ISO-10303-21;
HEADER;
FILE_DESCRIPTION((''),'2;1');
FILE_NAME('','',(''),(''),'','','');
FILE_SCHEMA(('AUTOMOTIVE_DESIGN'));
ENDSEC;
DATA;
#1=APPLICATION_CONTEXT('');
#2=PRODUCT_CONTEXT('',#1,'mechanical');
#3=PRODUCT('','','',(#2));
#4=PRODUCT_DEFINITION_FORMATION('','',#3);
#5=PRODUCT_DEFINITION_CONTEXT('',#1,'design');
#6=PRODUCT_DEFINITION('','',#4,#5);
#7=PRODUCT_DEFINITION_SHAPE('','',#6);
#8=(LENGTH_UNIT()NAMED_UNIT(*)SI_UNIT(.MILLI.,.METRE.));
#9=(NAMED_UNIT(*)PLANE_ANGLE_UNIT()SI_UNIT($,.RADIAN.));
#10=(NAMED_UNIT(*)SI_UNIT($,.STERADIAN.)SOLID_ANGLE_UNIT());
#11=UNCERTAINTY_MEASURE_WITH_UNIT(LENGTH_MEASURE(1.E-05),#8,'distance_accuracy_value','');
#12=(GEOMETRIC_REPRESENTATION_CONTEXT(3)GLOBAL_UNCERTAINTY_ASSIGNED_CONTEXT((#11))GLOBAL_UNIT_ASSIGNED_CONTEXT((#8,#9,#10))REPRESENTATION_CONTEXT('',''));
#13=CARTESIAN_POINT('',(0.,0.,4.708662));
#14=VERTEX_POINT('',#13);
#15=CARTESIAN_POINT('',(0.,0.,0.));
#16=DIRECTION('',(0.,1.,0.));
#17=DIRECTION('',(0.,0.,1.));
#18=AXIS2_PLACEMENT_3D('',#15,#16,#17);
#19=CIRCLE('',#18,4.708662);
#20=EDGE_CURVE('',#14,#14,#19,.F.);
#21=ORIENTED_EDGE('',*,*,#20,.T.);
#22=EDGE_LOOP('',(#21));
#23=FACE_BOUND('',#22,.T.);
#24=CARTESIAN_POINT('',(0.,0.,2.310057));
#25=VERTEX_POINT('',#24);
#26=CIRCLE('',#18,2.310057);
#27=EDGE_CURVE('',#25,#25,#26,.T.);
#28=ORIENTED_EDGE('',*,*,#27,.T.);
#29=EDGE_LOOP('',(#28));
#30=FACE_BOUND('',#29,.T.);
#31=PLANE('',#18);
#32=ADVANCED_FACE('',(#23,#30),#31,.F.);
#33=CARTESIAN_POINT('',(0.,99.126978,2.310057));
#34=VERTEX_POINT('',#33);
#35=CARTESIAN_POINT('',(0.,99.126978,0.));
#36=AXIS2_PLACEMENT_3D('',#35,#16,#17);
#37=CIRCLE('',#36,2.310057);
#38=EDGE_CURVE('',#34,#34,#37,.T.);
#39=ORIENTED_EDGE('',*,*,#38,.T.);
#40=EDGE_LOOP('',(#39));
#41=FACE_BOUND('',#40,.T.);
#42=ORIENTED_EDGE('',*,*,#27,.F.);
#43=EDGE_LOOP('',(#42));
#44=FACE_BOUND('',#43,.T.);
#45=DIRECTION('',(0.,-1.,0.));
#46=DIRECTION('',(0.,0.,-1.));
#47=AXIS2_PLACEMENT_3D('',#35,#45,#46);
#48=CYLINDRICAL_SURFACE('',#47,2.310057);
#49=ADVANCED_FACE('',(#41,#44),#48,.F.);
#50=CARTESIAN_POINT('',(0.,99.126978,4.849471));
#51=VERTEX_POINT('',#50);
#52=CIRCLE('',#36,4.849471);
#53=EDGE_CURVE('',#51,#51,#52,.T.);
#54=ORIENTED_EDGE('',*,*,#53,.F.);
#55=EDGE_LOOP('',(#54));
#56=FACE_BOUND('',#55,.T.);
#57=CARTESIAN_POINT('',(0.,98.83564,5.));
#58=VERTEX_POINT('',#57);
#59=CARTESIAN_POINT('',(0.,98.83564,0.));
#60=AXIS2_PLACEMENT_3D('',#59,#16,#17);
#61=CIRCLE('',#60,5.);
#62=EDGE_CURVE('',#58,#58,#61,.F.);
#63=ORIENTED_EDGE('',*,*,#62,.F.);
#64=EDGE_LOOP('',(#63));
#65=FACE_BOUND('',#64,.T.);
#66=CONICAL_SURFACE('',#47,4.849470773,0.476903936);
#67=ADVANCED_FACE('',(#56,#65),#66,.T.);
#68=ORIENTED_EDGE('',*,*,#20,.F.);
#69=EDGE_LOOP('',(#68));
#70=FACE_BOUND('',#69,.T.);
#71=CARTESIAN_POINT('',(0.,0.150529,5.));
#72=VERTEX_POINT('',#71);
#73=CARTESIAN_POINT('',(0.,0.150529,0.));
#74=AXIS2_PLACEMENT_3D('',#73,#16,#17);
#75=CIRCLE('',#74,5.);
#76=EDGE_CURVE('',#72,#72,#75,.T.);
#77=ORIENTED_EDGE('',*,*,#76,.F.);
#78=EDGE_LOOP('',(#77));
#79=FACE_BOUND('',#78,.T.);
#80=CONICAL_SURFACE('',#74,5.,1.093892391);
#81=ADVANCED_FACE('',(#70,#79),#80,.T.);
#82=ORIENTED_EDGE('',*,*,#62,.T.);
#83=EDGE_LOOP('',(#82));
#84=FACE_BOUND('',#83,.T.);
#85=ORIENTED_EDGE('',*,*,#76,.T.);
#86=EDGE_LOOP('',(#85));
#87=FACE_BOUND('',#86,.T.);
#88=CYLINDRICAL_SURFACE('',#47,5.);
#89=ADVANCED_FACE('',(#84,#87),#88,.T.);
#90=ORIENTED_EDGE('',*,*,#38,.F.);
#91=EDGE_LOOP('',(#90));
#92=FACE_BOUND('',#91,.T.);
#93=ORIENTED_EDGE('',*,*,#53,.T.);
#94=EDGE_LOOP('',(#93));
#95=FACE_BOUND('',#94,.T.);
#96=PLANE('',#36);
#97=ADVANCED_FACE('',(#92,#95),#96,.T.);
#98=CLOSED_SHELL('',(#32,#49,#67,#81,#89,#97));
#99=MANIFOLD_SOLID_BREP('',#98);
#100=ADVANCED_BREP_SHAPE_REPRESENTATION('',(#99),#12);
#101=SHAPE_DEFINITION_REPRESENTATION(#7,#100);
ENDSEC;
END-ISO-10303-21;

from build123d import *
from OCP.BRepFilletAPI import BRepFilletAPI_MakeChamfer

# Parameters (mm, degrees)
SKETCH1_R           = 5
BOSS_EXTRUDE1_DEPTH = 99.12697805
SKETCH2_R           = 2.310056849
CUT_EXTRUDE1_DEPTH  = 100.37885981
CHAMFER1_SIZE       = 0.291338269
CHAMFER1_SIZE2      = 0.150529227


with BuildPart() as part:
    # Sketch1 → Boss-Extrude1 (new body)
    with BuildSketch(Plane(origin=(0, 0, 0), x_dir=(1, 0, 0), z_dir=(0, 1, 0))):
        Circle(SKETCH1_R)
    extrude(amount=BOSS_EXTRUDE1_DEPTH)

    # Sketch2 → Cut-Extrude1 (cut, through all)
    with BuildSketch(Plane(origin=(0, 0, 0), x_dir=(1, 0, 0), z_dir=(0, 1, 0))):
        Circle(SKETCH2_R)
    extrude(amount=CUT_EXTRUDE1_DEPTH, mode=Mode.SUBTRACT)

    # Chamfer1: one chamfer whose edges measure the first distance from different faces: ONE call of the kernel's chamfer builder (chamfer() names one face for all edges)
    chamfer1_edges_1 = [part.edges().sort_by_distance(p)[0] for p in [
        (-5, 99.12697805, 0),
    ]]
    chamfer1_side_1 = [part.faces().sort_by_distance(p)[0] for p in [
        (-5, 49.563489025, 0),
    ]]
    chamfer1_edges_2 = [part.edges().sort_by_distance(p)[0] for p in [
        (-5, 0, 0),
    ]]
    chamfer1_side_2 = [part.faces().sort_by_distance(p)[0] for p in [
        (-4.858578644, 0, 0),
    ]]
    chamfer1 = BRepFilletAPI_MakeChamfer(part.part.solid().wrapped)
    for e in chamfer1_edges_1:
        chamfer1.Add(CHAMFER1_SIZE, CHAMFER1_SIZE2, e.wrapped, chamfer1_side_1[0].wrapped)  # the first distance lies on this face
    for e in chamfer1_edges_2:
        chamfer1.Add(CHAMFER1_SIZE, CHAMFER1_SIZE2, e.wrapped, chamfer1_side_2[0].wrapped)  # the first distance lies on this face
    add(Compound.cast(chamfer1.Shape()), mode=Mode.REPLACE)


solid = part.part
